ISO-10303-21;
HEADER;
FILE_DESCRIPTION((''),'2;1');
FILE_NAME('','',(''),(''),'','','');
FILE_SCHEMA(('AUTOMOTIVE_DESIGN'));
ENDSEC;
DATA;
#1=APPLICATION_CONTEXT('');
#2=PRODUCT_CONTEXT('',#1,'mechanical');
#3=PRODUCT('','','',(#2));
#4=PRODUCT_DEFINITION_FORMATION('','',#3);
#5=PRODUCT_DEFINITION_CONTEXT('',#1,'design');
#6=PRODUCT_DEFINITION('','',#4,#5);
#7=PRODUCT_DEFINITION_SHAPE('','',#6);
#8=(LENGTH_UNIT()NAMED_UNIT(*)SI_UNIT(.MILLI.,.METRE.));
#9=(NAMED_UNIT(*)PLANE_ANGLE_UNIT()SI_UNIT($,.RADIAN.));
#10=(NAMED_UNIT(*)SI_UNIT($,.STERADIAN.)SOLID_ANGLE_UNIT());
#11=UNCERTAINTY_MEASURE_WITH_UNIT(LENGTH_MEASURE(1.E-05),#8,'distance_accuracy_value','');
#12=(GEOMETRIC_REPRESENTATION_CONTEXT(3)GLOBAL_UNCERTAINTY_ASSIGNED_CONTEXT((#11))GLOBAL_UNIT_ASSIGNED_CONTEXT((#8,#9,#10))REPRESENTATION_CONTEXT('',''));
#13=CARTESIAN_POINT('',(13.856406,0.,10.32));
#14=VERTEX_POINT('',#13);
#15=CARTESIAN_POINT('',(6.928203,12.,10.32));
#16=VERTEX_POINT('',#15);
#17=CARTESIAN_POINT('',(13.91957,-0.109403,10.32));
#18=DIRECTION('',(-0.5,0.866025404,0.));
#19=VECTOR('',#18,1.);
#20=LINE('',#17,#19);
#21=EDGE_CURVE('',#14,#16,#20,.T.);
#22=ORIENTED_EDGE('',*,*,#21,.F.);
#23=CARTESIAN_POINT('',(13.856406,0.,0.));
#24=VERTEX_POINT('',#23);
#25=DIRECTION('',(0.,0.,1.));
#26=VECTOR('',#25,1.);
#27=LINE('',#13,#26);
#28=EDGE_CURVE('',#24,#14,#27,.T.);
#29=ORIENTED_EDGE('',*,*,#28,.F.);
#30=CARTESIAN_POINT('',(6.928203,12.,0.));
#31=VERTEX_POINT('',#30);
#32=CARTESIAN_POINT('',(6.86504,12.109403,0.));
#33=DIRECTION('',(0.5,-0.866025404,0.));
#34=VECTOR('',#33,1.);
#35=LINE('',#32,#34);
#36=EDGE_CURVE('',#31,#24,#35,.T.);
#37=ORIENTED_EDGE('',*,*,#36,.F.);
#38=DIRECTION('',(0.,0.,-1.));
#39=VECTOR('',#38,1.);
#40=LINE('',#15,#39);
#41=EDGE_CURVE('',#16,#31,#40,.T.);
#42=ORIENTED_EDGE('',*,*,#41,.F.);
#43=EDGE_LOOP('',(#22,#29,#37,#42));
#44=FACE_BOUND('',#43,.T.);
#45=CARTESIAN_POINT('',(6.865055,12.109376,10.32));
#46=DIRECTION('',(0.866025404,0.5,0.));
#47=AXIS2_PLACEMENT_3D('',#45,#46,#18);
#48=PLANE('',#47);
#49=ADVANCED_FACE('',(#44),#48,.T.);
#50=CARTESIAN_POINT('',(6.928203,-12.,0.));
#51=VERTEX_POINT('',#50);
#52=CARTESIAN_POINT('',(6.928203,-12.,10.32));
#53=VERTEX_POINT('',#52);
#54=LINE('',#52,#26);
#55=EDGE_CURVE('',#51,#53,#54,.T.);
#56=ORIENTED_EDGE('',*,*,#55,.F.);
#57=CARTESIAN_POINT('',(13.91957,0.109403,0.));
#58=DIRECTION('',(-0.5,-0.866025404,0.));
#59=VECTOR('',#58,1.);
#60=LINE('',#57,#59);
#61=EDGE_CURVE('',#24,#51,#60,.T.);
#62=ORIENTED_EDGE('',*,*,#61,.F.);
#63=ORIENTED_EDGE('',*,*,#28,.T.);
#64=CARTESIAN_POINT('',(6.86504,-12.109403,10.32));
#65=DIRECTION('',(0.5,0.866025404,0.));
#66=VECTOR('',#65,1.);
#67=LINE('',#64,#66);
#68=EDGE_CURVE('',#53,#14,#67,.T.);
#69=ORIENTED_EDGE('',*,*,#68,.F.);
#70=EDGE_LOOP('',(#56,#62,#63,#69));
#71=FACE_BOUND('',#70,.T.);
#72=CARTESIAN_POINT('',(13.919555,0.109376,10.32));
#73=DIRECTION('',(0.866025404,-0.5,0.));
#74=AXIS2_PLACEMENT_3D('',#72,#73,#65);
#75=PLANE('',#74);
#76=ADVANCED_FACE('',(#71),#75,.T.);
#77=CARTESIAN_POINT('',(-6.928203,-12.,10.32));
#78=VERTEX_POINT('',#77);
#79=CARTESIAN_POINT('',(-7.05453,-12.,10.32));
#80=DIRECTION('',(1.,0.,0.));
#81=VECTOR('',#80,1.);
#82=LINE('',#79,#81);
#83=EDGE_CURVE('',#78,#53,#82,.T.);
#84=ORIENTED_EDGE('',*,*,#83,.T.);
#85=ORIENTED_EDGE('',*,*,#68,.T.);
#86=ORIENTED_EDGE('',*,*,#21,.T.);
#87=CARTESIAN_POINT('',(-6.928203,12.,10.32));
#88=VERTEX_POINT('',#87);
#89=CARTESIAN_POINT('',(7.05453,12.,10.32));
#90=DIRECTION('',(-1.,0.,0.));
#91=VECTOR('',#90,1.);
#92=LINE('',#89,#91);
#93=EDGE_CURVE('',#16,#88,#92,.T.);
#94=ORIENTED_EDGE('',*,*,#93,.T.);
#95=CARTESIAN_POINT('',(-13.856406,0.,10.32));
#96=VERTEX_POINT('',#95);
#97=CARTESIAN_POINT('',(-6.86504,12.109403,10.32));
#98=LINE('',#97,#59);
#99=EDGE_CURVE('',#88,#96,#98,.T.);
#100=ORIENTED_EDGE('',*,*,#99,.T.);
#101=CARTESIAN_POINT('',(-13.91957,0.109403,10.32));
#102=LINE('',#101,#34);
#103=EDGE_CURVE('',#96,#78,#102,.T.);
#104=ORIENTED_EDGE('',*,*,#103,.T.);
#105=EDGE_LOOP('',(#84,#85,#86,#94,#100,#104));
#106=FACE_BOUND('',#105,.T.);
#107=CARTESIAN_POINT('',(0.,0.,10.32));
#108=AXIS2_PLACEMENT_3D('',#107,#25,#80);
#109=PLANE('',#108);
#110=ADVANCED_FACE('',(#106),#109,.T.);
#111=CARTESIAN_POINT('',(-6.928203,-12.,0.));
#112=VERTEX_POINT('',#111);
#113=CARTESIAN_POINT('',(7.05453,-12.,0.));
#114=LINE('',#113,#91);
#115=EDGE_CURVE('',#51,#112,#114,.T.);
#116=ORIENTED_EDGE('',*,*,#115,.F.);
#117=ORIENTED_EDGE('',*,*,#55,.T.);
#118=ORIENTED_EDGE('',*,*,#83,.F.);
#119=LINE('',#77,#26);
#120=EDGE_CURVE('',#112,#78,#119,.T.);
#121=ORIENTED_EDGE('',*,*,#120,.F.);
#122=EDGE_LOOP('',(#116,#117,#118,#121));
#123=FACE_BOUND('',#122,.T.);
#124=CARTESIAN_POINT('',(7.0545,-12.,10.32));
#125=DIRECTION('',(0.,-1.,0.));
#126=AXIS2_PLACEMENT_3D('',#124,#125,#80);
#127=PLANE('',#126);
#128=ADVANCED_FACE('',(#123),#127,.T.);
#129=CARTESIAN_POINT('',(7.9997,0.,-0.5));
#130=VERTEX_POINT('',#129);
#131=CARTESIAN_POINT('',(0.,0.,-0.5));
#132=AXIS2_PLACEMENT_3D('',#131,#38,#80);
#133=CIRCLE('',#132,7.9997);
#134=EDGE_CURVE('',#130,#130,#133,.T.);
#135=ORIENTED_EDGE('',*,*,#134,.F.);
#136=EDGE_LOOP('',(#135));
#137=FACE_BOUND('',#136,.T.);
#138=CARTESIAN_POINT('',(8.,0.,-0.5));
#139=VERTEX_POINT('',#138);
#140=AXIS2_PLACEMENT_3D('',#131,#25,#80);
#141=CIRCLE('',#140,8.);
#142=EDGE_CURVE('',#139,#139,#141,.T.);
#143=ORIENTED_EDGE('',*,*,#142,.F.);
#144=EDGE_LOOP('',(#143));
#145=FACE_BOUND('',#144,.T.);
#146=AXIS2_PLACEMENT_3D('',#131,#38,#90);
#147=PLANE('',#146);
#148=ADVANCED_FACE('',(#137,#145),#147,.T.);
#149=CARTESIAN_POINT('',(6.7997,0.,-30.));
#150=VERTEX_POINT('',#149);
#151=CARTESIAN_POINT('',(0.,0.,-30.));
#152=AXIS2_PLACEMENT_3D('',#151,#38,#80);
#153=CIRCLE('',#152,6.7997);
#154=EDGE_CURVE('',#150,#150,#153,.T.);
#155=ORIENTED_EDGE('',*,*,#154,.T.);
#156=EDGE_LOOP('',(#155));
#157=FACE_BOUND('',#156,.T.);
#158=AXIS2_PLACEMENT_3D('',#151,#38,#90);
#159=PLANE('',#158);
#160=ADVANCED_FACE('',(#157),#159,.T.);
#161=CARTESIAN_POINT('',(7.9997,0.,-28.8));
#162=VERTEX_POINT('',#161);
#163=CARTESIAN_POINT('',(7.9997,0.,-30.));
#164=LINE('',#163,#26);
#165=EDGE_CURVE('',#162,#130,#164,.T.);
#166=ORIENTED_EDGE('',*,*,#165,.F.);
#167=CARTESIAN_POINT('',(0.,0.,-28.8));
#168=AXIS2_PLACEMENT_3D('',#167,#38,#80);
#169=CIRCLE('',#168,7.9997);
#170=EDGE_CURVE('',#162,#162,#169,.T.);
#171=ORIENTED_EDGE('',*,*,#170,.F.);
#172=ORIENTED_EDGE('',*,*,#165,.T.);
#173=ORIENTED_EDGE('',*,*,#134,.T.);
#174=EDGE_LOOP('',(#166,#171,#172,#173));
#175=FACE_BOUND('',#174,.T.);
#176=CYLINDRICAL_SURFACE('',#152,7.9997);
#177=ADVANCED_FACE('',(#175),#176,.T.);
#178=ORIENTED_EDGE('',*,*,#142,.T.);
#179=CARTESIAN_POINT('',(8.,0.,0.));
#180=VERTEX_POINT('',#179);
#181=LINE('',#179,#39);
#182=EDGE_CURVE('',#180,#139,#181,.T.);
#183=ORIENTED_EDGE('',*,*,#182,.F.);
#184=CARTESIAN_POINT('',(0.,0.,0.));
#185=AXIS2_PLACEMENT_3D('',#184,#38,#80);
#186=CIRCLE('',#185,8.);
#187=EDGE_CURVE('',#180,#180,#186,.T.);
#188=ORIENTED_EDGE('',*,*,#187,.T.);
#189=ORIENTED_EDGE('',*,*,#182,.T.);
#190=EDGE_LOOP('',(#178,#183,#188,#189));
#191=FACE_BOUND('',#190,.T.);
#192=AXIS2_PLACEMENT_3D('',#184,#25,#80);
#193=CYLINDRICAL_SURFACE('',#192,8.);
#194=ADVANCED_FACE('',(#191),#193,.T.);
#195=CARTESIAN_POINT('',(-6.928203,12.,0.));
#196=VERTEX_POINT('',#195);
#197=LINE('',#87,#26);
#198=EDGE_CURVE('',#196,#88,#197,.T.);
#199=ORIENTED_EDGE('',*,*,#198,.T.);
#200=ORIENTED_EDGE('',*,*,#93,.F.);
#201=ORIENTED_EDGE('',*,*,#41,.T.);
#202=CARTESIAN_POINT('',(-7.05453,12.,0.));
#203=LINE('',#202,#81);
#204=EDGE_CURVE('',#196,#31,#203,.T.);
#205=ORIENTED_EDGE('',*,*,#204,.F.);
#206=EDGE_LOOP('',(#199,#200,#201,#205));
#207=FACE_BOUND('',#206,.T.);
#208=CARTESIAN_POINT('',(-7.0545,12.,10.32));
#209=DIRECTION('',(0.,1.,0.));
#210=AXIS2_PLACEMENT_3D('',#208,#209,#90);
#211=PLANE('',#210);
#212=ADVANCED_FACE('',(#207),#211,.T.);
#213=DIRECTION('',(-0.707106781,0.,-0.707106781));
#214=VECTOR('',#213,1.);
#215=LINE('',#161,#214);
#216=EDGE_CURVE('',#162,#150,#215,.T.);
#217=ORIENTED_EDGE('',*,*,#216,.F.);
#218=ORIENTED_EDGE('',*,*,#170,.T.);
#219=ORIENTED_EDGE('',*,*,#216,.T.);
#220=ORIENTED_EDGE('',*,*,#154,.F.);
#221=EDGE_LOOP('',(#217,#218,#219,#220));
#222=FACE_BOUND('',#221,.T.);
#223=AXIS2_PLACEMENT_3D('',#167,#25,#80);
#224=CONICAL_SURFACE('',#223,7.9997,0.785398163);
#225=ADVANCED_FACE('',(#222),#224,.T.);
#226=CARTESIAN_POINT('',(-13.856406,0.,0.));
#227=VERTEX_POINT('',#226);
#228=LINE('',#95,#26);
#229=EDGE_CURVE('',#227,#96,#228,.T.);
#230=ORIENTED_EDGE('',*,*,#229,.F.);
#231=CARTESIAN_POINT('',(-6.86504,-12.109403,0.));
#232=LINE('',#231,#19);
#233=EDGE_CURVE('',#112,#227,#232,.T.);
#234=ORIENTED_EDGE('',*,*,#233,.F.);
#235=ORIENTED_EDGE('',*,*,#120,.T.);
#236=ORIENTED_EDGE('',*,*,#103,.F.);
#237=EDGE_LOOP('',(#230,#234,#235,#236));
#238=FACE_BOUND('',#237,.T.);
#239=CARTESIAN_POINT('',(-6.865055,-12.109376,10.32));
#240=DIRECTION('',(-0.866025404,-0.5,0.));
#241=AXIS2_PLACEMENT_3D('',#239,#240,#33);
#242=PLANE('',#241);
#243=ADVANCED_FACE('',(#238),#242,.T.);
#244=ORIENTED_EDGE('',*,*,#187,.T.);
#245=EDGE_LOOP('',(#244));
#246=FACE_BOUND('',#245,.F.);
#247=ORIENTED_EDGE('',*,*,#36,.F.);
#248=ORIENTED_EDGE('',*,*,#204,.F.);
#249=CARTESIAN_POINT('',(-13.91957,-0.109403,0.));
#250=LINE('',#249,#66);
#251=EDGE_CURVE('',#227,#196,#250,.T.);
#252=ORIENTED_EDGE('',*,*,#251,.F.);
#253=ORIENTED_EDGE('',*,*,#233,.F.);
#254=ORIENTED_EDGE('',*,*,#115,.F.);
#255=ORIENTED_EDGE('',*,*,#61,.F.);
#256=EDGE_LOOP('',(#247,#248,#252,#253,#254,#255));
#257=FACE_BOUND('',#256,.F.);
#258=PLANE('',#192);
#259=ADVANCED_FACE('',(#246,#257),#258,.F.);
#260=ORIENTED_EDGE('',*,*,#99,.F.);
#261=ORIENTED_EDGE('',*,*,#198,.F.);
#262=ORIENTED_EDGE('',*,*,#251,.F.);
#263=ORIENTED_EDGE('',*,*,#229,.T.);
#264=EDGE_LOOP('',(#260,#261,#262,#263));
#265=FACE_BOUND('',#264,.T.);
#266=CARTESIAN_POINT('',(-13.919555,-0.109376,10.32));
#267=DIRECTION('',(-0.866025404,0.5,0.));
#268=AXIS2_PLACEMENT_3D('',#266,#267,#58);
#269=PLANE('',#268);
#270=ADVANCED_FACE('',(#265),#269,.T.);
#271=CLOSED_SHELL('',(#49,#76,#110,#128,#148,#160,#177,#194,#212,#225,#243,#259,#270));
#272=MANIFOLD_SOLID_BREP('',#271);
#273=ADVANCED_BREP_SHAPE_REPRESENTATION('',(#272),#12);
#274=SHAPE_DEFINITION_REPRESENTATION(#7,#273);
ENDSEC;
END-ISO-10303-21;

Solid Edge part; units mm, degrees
sketch "Sketch1" plane through (0, 0, 0) normal (0, 0, 1) x (1, 0, 0)
  circle A0 centre (0, 0) radius 13.92
  dimension "D1" = 27.84
extrude "Protrusion1" add sketch "Sketch1" along normal blind 10.32
sketch "Sketch2" plane through (0, 0, 0) normal (0, 0, -1) x (1, 0, 0)
  circle A0 centre (0, 0) radius 8
extrude "Protrusion2" add sketch "Sketch2" along normal blind 30
sketch "Sketch3" plane through (0, 0, -30) normal (0, 0, -1) x (1, 0, 0)
  circle A0 centre (0, 0) radius 7.9997
extrude "Cutout1" cut sketch "Sketch3" against normal blind 29.5 flip side to cut
chamfer "Chamfer_1" distance 1.2 angle 45 1 edges at (-7.9997, 0, -30)
sketch "Sketch4" plane through (0, 0, 10.32) normal (0, 0, 1) x (1, 0, 0)
  line L0 (-7.0545, 12) -> (7.0545, 12)
  dimension "D1" = 24
extrude "Cutout2" cut sketch "Sketch4" against normal up to next material side at (0, 12.05, 10.32)
pattern_circular "Pattern1" count 6 over 360 about axis through (0, 0, 10.32) along (0, 0, 1) of "Cutout2"
properties part number "107492"
